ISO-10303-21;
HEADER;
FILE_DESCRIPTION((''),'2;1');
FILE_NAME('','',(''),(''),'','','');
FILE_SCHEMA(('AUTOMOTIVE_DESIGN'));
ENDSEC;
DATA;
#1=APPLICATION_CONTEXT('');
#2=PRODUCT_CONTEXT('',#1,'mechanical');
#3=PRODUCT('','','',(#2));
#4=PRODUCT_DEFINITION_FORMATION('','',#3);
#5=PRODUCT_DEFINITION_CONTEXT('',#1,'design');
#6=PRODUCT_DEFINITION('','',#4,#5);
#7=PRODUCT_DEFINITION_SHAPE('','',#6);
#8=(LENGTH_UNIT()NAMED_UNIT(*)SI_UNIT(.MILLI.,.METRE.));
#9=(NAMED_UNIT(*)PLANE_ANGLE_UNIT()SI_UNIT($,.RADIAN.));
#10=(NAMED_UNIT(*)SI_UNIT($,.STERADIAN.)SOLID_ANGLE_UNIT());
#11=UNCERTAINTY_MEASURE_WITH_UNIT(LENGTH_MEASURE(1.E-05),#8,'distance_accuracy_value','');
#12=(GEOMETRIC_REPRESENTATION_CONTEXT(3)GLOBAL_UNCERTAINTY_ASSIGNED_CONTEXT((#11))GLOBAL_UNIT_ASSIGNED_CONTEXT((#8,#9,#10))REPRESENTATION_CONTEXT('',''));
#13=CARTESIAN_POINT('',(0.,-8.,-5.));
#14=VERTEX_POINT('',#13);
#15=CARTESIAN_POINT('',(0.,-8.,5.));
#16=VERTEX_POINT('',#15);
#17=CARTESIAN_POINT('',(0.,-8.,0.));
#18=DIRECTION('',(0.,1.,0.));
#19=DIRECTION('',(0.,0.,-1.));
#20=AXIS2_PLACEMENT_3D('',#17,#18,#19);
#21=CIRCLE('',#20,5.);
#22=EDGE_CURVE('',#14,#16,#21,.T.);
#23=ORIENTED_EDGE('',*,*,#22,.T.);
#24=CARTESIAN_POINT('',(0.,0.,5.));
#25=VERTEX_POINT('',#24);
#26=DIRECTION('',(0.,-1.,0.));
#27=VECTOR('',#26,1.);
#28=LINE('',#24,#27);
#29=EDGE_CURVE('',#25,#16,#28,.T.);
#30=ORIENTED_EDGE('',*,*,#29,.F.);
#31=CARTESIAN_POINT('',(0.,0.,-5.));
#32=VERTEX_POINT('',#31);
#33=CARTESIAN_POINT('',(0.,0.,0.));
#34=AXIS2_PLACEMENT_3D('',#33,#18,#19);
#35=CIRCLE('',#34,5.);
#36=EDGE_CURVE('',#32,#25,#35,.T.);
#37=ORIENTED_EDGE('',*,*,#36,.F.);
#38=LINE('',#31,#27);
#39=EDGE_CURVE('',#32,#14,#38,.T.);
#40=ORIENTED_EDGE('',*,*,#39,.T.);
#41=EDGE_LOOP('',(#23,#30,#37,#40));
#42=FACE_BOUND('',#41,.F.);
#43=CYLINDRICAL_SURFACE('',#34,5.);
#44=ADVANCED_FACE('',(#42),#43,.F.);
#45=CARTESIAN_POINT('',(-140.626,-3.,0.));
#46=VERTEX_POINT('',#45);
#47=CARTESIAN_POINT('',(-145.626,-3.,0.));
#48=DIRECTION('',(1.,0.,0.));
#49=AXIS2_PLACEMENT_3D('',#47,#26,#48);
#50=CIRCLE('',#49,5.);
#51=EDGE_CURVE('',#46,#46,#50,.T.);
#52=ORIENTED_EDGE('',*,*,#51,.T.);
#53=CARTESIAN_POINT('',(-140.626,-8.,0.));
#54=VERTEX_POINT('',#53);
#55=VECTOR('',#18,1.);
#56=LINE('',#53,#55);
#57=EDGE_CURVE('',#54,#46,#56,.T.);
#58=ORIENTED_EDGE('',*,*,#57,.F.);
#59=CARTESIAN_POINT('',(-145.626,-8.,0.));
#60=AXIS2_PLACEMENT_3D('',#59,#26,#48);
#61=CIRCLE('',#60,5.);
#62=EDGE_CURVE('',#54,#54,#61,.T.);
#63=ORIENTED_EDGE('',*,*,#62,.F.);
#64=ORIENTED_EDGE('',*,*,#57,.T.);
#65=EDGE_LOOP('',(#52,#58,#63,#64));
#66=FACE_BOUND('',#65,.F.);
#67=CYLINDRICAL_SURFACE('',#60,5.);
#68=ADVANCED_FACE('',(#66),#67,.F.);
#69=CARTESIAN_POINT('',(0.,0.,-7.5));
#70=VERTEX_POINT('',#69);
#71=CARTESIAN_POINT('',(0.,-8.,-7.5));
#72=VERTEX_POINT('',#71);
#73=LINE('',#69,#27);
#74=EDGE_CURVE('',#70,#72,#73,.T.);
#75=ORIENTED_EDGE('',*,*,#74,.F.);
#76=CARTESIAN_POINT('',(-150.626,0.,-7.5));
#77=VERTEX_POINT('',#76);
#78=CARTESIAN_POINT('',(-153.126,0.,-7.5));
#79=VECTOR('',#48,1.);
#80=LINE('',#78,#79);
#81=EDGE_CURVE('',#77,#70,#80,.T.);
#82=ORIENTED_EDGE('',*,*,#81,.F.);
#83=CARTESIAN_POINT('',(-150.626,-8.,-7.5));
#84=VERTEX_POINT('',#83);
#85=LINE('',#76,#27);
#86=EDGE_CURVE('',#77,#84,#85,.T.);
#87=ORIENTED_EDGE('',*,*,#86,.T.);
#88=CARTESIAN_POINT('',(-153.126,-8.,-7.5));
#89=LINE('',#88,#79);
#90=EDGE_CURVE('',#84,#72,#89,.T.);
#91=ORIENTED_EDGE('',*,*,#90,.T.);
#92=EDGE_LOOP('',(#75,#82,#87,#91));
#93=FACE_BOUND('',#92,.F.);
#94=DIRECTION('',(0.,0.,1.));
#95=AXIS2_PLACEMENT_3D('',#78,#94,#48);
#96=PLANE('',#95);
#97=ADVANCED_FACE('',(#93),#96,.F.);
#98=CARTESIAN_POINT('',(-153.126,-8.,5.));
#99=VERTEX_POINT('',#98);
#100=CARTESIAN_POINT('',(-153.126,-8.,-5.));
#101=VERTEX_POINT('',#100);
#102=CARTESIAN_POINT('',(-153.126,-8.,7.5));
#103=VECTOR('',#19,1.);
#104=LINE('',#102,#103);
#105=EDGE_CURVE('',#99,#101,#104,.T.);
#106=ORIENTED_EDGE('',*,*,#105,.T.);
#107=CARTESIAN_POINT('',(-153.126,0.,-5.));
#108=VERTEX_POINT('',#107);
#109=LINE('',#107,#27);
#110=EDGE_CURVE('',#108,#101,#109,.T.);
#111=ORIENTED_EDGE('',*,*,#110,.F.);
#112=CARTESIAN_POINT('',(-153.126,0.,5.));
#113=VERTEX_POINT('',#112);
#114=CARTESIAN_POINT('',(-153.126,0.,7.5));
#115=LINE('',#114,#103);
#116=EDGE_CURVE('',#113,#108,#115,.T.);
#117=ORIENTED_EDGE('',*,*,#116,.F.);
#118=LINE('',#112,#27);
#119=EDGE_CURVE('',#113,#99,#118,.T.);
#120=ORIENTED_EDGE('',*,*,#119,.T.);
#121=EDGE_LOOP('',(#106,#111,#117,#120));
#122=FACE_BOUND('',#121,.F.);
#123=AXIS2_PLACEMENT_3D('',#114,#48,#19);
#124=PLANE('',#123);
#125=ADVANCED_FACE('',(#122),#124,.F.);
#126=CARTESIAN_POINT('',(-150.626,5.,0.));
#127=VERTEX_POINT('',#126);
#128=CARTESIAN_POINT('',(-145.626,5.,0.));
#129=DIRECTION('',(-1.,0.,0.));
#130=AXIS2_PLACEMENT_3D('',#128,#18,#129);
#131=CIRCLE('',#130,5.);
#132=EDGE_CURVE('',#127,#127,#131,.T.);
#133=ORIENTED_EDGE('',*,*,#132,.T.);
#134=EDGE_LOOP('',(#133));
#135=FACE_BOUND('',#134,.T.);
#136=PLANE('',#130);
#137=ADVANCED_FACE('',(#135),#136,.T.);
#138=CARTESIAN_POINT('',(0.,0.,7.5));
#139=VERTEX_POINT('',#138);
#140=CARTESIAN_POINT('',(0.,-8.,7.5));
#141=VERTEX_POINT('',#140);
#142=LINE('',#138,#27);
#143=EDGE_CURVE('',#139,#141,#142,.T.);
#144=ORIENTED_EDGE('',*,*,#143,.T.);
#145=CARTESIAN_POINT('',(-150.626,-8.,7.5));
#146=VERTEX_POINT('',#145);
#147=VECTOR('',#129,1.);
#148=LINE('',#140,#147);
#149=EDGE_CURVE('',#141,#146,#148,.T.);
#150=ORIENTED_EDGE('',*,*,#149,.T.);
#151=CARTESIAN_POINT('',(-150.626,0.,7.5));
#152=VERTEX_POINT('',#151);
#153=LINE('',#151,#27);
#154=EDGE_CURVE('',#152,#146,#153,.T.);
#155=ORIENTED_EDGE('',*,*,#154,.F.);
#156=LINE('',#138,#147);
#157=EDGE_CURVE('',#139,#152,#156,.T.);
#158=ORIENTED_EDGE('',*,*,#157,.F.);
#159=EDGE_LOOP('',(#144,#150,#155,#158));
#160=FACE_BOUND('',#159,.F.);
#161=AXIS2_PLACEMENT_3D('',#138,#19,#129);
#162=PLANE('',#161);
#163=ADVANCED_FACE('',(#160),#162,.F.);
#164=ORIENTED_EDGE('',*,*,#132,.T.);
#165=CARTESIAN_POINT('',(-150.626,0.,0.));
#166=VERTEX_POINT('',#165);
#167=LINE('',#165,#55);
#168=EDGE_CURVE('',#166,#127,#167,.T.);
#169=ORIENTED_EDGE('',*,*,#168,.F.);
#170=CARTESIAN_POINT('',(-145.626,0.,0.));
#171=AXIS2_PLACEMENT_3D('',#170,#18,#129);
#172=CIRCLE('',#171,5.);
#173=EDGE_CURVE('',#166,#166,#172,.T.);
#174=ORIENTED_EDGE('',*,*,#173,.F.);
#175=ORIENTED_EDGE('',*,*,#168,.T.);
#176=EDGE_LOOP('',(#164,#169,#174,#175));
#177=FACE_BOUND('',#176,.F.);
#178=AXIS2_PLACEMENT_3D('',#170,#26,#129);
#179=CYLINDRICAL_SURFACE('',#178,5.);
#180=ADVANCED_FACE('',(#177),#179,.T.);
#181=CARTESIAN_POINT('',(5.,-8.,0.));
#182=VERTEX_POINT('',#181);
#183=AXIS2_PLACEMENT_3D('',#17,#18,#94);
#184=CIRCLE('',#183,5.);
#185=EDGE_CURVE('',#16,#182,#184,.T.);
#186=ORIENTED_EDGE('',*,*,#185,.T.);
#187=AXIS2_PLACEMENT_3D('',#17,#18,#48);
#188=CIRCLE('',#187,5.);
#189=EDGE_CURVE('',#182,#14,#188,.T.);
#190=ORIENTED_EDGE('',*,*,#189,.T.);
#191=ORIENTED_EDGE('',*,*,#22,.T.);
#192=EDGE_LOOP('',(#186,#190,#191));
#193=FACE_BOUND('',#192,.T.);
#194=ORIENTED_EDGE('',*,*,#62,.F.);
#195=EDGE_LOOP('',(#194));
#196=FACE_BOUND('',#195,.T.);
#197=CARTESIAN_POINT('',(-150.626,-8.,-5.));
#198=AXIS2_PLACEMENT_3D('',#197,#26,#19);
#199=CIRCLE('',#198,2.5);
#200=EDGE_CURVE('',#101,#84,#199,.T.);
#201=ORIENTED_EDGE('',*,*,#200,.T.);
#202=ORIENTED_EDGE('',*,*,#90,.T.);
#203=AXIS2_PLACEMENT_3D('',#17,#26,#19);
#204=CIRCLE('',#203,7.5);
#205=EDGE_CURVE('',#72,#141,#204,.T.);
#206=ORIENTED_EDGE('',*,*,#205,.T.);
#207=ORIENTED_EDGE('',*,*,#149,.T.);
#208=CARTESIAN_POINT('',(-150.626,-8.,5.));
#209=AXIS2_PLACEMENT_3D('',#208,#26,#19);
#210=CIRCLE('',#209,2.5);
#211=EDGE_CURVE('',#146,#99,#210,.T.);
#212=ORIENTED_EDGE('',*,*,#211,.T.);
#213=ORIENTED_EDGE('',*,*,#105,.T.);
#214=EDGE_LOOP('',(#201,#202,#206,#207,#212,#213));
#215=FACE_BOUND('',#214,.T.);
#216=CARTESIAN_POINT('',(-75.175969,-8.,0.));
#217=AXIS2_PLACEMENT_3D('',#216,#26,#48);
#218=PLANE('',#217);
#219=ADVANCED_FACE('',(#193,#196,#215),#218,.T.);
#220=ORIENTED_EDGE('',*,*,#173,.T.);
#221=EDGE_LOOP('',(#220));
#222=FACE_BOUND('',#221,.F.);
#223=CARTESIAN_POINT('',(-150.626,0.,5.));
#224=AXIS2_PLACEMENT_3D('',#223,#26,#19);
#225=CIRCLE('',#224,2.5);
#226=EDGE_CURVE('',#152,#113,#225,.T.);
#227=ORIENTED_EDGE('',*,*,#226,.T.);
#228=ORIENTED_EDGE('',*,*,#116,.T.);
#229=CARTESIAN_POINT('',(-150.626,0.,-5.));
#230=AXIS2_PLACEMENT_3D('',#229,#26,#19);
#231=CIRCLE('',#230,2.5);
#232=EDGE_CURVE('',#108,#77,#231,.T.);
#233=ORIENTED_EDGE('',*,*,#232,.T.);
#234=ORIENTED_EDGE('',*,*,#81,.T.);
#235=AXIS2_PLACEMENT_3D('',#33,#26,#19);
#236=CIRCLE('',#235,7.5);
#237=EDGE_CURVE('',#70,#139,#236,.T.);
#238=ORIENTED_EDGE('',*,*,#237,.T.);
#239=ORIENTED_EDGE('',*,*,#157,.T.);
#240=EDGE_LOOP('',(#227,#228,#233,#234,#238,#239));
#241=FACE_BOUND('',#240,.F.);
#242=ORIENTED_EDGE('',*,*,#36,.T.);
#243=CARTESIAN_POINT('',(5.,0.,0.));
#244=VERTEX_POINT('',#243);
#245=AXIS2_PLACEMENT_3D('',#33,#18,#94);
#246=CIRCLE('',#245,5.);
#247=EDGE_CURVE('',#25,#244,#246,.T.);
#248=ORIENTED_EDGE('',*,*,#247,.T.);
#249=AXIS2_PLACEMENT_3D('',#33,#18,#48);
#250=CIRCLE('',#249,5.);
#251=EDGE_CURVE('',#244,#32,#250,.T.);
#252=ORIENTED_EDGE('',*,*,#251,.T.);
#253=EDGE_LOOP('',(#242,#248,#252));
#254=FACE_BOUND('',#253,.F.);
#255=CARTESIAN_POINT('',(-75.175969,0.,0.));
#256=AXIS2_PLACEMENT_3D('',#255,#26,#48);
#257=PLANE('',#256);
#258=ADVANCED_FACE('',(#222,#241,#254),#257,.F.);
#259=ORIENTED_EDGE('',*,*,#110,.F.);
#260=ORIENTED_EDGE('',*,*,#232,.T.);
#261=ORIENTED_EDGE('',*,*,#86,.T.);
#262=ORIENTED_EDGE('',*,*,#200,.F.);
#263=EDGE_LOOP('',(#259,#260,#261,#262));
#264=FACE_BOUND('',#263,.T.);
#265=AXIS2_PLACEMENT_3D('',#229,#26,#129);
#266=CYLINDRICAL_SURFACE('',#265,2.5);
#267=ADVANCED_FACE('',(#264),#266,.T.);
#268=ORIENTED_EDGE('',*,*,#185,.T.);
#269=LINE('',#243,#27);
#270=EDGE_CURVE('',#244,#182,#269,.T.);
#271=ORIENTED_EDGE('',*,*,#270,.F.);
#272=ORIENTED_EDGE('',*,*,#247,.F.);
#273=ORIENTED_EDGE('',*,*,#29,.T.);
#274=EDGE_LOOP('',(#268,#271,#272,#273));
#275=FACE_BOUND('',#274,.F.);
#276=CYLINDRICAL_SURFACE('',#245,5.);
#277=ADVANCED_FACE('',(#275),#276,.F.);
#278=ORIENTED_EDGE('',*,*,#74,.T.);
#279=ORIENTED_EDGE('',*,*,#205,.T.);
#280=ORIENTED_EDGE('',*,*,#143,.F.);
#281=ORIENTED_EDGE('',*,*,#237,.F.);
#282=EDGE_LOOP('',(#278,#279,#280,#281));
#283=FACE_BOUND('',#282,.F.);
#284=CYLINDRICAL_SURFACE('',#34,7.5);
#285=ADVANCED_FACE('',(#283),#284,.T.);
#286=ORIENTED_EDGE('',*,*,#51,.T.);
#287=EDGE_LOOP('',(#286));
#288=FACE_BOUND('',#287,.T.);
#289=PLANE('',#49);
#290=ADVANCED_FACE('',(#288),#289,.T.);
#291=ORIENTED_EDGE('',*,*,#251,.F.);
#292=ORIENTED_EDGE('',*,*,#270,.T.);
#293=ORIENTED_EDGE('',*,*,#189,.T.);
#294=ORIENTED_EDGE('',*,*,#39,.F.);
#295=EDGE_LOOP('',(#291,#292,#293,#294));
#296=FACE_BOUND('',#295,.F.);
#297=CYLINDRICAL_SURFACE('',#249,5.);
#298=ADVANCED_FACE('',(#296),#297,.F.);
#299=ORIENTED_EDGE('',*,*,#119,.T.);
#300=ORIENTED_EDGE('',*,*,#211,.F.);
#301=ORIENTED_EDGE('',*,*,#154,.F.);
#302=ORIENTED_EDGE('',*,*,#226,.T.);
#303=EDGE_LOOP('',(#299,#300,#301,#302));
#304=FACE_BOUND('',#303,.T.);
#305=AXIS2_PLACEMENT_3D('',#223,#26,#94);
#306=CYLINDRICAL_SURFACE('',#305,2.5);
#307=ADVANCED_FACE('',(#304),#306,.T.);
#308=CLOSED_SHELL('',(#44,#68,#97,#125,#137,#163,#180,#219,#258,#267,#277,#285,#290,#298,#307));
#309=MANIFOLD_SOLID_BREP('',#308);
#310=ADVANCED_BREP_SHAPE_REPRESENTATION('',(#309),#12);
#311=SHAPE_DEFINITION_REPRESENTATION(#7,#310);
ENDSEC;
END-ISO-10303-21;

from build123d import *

# Parameters (mm, degrees)
F1_DEPTH = 8
F2_R     = 2.5
F3_R     = 5
F4_DEPTH = 5
F5_R     = 5
F6_DEPTH = 5


# Not quite as in the source:
# - a feature names something its author has since deleted; it is built from what else it names


with BuildPart() as f1:
    # F0 (on Front) → F1 (new body)
    with BuildSketch(Plane.XZ):
        with BuildLine():
            ThreePointArc((0, -7.5), (-7.5, 0), (0, 7.5))
            Line((0, 7.5), (-153.126, 7.5))
            Line((-153.126, 7.5), (-153.126, -7.5))
            Line((-153.126, -7.5), (0, -7.5))
        make_face()
        with BuildLine():
            Line((0, 5), (0, 7.5))
            ThreePointArc((0, 7.5), (-7.5, 0), (0, -7.5))
            Line((0, -7.5), (0, -5))
            ThreePointArc((0, -5), (-5, 0), (0, 5))
        make_face()
        with BuildLine():
            ThreePointArc((0, -7.5), (5.3033008589, -5.3033008589), (7.5, 0))
            ThreePointArc((7.5, 0), (5.3033008589, 5.3033008589), (0, 7.5))
            Line((0, 7.5), (0, 5))
            ThreePointArc((0, 5), (3.5355339059, 3.5355339059), (5, 0))
            ThreePointArc((5, 0), (3.5355339059, -3.5355339059), (0, -5))
            Line((0, -5), (0, -7.5))
        make_face()
    extrude(amount=F1_DEPTH)

    # F2
    f2_edges = [f1.edges().sort_by_distance(p)[0] for p in [
        (-153.126, -4, 7.5),
        (-153.126, -4, -7.5),
    ]]
    fillet(f2_edges, radius=F2_R)

    # F3 (on face) → F4 (join)
    with BuildSketch(Plane(origin=(0, 0, 0), x_dir=(-1, 0, 0), z_dir=(0, 1, 0))):
        with Locations((145.626, 0)):
            Circle(F3_R)
    extrude(amount=F4_DEPTH)

    # F5 (on face) → F6 (cut)
    with BuildSketch(Plane.XZ.offset(8)):
        with Locations((-145.626, 0)):
            Circle(F5_R)
    extrude(amount=-F6_DEPTH, mode=Mode.SUBTRACT)


solid = f1.part
